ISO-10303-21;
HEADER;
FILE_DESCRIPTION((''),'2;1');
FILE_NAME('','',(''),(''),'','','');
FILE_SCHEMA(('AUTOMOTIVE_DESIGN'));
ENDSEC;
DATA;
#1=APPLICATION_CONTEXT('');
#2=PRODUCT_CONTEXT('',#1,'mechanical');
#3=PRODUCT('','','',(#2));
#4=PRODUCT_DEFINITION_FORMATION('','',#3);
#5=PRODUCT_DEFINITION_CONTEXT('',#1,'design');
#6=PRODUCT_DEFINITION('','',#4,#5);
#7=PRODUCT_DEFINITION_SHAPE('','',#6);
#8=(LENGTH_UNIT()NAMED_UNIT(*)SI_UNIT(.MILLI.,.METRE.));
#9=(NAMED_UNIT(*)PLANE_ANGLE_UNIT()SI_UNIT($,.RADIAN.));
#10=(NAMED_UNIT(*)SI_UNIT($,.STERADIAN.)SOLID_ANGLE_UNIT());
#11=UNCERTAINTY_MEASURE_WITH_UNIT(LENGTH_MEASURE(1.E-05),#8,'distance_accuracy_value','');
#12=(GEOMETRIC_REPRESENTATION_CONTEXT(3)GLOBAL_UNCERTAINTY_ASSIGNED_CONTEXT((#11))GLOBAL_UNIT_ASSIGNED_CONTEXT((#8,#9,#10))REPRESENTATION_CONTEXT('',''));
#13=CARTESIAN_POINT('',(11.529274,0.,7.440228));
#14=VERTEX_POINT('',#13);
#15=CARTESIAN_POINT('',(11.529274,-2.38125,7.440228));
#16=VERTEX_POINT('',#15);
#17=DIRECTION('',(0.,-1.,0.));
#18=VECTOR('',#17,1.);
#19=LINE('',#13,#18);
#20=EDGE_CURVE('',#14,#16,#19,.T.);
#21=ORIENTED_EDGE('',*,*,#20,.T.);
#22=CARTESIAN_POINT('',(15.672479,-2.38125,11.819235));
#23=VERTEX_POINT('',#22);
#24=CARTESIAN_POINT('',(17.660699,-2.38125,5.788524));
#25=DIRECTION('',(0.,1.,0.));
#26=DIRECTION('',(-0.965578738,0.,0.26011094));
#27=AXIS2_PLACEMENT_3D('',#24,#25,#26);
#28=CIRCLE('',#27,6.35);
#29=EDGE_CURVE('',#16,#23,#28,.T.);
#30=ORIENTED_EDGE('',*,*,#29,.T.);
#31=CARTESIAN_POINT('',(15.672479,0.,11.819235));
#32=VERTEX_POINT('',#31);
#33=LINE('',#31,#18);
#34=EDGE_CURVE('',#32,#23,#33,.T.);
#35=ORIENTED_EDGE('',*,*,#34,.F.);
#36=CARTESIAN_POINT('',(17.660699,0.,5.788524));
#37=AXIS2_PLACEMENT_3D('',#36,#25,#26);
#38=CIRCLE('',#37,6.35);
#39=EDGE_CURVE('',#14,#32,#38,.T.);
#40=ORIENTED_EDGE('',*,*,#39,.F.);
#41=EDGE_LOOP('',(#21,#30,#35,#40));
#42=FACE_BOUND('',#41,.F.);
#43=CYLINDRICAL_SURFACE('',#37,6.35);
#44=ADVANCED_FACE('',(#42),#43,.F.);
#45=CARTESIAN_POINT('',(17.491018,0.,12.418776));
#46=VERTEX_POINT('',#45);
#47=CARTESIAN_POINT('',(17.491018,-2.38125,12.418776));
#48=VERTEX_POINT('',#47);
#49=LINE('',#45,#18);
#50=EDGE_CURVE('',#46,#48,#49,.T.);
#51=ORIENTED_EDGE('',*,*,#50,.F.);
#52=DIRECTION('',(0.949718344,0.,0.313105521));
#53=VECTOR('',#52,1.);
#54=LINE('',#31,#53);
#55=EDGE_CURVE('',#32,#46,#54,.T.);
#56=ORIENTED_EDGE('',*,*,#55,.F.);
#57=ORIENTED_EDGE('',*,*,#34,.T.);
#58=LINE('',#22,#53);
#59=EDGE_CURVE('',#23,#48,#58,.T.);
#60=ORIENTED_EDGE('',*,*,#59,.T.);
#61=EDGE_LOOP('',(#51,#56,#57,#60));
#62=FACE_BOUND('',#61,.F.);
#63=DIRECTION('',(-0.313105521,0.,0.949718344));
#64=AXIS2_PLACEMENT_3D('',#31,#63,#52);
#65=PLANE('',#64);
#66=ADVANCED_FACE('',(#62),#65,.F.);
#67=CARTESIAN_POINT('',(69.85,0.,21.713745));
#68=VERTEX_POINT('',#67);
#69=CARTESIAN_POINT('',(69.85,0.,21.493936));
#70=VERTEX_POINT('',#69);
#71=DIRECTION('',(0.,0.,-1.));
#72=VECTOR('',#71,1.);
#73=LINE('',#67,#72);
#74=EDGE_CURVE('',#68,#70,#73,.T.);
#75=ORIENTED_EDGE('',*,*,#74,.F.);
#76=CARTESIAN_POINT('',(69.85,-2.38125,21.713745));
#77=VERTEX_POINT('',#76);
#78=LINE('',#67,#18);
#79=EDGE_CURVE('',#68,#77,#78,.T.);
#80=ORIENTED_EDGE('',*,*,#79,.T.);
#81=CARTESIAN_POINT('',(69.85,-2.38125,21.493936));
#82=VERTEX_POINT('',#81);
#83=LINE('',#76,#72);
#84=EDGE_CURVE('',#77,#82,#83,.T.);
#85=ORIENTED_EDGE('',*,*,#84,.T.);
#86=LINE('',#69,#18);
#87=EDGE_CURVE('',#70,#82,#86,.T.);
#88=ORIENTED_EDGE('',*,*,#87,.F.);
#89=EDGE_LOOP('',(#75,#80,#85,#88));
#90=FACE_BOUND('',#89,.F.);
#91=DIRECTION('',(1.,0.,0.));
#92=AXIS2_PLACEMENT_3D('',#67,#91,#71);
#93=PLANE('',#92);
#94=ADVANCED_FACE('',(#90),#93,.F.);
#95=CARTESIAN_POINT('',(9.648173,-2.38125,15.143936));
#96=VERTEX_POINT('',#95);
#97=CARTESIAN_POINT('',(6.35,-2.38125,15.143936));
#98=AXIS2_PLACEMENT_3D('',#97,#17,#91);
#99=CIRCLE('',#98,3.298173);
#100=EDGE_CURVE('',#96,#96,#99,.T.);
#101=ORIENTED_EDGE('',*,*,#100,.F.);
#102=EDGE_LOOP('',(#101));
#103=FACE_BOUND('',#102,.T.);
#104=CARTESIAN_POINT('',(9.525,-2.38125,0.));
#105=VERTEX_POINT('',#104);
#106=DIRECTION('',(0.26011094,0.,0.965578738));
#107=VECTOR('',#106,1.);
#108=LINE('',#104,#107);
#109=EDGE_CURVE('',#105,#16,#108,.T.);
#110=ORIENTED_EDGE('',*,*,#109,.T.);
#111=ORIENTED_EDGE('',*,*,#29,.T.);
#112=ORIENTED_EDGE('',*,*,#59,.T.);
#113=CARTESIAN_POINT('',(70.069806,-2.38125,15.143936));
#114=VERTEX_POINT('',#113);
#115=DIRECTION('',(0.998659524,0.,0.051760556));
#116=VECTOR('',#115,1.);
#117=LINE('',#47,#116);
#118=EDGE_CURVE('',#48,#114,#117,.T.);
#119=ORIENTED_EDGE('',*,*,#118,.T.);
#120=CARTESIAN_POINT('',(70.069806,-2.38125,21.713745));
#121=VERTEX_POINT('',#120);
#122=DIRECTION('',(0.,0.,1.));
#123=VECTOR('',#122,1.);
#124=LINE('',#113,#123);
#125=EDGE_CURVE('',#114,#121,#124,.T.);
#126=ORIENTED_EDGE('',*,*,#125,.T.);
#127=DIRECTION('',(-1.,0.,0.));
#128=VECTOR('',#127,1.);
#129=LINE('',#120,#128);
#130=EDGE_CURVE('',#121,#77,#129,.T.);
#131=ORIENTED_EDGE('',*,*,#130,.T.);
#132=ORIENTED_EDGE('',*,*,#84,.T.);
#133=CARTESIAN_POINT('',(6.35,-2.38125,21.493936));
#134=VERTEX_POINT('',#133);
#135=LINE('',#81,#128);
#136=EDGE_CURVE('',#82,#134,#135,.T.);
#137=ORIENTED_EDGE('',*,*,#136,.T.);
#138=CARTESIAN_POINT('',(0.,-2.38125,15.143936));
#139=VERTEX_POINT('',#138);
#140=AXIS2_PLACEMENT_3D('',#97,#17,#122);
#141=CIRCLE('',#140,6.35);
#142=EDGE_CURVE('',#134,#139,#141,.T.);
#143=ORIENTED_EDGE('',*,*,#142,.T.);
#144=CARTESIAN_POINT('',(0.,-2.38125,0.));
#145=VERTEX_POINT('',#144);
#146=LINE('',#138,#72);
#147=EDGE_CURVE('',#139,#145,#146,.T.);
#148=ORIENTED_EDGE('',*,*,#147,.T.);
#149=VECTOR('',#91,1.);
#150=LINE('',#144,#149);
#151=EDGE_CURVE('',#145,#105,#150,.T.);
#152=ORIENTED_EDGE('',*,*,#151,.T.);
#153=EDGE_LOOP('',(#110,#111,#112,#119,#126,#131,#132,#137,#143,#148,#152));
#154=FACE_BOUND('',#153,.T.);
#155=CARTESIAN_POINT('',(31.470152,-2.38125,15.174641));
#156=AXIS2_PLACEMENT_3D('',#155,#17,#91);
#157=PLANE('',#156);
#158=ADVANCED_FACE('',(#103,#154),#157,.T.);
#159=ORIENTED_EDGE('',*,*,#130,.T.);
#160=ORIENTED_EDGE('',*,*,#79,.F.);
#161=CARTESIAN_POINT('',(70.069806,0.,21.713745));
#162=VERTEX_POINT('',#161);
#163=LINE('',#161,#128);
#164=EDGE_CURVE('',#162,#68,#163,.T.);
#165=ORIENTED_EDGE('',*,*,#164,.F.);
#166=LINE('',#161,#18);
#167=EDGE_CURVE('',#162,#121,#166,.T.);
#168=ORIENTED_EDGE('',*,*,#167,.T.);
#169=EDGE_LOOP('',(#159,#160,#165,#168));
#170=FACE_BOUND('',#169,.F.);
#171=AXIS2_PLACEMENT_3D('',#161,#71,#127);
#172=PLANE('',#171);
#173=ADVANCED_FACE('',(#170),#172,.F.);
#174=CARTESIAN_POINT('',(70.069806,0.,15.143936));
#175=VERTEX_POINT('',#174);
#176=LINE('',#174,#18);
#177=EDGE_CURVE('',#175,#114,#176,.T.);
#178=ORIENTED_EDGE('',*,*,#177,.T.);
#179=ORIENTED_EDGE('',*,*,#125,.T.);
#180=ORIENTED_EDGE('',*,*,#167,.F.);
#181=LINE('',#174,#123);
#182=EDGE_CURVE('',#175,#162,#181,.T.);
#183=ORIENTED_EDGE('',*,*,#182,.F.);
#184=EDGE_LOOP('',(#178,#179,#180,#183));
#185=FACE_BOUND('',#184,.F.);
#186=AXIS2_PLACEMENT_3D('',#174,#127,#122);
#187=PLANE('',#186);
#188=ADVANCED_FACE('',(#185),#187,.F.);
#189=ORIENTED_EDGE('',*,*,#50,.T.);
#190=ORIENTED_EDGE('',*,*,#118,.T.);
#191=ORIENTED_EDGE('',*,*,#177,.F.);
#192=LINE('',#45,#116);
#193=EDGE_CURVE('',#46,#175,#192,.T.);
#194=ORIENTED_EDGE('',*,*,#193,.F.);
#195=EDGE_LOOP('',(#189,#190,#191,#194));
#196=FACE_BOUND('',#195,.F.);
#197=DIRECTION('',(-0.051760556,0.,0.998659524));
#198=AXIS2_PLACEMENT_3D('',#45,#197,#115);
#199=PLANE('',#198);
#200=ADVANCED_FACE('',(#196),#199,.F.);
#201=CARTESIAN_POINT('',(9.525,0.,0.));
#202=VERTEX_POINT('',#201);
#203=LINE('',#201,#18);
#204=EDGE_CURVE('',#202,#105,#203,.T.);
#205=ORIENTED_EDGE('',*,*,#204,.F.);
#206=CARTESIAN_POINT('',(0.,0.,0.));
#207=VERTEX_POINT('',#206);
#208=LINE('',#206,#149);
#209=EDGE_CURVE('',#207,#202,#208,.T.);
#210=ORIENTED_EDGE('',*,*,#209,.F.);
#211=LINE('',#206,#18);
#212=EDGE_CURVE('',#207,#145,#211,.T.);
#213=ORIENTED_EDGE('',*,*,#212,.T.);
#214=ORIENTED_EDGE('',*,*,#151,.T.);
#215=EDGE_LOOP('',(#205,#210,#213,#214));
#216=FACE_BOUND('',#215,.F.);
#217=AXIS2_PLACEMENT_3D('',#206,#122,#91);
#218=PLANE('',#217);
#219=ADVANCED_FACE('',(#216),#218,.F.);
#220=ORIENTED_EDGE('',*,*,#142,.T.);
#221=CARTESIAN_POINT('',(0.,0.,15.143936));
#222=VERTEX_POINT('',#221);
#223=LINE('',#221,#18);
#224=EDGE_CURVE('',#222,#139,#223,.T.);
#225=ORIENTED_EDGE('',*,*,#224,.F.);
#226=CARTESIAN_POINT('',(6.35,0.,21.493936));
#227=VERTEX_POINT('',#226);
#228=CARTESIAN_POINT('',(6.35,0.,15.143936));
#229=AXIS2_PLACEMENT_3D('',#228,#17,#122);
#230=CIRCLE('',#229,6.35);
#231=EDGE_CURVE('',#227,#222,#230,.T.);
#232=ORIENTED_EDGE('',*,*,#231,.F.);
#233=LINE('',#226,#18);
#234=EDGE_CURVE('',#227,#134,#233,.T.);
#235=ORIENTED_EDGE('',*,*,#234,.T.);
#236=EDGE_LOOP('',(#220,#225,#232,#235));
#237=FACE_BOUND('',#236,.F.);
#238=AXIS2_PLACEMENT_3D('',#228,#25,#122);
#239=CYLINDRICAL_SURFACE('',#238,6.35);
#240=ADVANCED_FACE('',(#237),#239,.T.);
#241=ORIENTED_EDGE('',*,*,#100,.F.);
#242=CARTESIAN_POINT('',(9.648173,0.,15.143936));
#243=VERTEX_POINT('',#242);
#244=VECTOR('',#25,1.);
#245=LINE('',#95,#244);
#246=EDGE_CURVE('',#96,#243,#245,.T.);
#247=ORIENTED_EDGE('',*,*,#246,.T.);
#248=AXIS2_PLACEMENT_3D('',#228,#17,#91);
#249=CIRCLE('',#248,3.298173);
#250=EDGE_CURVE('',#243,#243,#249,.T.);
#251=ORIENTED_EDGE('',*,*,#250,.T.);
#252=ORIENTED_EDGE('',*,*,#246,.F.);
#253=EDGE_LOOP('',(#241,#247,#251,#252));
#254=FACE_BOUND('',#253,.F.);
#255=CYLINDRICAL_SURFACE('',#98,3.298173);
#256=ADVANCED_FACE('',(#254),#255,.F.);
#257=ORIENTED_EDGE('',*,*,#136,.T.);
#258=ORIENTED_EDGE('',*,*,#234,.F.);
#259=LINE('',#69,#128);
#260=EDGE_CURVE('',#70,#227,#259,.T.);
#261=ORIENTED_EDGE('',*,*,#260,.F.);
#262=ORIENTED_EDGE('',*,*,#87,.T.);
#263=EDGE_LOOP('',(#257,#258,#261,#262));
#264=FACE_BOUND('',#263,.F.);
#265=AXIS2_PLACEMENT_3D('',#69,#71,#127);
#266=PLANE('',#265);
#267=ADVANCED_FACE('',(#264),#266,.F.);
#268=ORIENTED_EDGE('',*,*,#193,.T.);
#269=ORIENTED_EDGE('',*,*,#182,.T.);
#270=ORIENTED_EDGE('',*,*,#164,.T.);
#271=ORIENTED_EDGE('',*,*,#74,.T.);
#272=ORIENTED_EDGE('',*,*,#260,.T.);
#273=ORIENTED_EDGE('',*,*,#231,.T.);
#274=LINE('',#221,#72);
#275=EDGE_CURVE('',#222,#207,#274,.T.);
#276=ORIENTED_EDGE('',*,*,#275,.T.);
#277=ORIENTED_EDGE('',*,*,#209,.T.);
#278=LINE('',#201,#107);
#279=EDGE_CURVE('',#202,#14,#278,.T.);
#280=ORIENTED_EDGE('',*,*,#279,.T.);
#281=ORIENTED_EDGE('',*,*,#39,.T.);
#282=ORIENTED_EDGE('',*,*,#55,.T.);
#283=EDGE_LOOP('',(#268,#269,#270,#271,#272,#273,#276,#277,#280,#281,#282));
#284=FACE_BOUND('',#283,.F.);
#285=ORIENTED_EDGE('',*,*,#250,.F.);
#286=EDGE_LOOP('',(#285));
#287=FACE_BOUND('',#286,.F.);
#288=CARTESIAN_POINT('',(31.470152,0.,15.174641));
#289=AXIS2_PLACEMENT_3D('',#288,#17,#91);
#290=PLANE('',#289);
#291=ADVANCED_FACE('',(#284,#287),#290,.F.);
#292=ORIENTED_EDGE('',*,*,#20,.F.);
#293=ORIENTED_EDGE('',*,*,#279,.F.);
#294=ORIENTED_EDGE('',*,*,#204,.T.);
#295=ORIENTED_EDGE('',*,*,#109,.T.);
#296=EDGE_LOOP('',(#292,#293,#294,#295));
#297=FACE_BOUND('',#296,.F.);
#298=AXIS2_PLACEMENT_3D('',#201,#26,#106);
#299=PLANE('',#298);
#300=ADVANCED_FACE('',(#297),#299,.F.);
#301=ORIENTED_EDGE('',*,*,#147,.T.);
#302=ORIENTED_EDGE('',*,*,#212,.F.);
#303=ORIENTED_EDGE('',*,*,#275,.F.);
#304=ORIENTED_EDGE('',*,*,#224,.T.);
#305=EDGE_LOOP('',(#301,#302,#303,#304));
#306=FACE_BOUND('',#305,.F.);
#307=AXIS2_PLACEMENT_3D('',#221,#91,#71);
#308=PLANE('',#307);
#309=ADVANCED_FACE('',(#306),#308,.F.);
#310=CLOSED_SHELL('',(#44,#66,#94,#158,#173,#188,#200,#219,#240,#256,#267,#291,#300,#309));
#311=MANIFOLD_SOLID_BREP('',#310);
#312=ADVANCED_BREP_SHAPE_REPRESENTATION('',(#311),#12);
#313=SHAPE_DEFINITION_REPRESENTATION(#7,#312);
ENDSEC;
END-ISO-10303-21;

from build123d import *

# Parameters (mm, degrees)
F1_DEPTH = 2.38125
F2_R     = 3.2981725782
F3_DEPTH = 25.4


# Not quite as in the source:
# - a length typed as a fraction of an inch, garbled in the dataset ("3 / 203.2 mm" for 3/8 in), is restored


with BuildPart() as f1:
    # F0 (on Front) → F1 (new body)
    with BuildSketch(Plane.XZ):
        with BuildLine():
            Line((69.85, 21.4939358442), (6.35, 21.4939358442))
            ThreePointArc((6.35, 21.4939358442), (1.8598719395, 19.6340639047), (0, 15.1439358442))
            Line((0, 15.1439358442), (0, 0))
            Line((0, 0), (9.525, 0))
            Line((9.525, 0), (11.5292743985, 7.4402281731))
            ThreePointArc((11.5292743985, 7.4402281731), (13.0480987591, 10.1527436206), (15.6724793239, 11.8192351874))
            Line((15.6724793239, 11.8192351874), (17.4910178831, 12.4187755322))
            Line((17.4910178831, 12.4187755322), (70.0698060278, 15.1439358442))
            Line((70.0698060278, 15.1439358442), (69.85, 15.1439358442))
            Line((69.85, 15.1439358442), (69.85, 21.4939358442))
        make_face()
        Polygon((69.85, 21.7137452919), (69.85, 21.4939358442), (69.85, 15.1439358442), (70.0698060278, 15.1439358442), (70.0698060278, 21.7137452919), align=None)
    extrude(amount=F1_DEPTH)

    # F2 (on face) → F3 (cut)
    with BuildSketch(Plane.XZ.offset(2.38125)):
        with Locations((6.35, 15.1439358442)):
            Circle(F2_R)
    extrude(amount=-F3_DEPTH, mode=Mode.SUBTRACT)


solid = f1.part
